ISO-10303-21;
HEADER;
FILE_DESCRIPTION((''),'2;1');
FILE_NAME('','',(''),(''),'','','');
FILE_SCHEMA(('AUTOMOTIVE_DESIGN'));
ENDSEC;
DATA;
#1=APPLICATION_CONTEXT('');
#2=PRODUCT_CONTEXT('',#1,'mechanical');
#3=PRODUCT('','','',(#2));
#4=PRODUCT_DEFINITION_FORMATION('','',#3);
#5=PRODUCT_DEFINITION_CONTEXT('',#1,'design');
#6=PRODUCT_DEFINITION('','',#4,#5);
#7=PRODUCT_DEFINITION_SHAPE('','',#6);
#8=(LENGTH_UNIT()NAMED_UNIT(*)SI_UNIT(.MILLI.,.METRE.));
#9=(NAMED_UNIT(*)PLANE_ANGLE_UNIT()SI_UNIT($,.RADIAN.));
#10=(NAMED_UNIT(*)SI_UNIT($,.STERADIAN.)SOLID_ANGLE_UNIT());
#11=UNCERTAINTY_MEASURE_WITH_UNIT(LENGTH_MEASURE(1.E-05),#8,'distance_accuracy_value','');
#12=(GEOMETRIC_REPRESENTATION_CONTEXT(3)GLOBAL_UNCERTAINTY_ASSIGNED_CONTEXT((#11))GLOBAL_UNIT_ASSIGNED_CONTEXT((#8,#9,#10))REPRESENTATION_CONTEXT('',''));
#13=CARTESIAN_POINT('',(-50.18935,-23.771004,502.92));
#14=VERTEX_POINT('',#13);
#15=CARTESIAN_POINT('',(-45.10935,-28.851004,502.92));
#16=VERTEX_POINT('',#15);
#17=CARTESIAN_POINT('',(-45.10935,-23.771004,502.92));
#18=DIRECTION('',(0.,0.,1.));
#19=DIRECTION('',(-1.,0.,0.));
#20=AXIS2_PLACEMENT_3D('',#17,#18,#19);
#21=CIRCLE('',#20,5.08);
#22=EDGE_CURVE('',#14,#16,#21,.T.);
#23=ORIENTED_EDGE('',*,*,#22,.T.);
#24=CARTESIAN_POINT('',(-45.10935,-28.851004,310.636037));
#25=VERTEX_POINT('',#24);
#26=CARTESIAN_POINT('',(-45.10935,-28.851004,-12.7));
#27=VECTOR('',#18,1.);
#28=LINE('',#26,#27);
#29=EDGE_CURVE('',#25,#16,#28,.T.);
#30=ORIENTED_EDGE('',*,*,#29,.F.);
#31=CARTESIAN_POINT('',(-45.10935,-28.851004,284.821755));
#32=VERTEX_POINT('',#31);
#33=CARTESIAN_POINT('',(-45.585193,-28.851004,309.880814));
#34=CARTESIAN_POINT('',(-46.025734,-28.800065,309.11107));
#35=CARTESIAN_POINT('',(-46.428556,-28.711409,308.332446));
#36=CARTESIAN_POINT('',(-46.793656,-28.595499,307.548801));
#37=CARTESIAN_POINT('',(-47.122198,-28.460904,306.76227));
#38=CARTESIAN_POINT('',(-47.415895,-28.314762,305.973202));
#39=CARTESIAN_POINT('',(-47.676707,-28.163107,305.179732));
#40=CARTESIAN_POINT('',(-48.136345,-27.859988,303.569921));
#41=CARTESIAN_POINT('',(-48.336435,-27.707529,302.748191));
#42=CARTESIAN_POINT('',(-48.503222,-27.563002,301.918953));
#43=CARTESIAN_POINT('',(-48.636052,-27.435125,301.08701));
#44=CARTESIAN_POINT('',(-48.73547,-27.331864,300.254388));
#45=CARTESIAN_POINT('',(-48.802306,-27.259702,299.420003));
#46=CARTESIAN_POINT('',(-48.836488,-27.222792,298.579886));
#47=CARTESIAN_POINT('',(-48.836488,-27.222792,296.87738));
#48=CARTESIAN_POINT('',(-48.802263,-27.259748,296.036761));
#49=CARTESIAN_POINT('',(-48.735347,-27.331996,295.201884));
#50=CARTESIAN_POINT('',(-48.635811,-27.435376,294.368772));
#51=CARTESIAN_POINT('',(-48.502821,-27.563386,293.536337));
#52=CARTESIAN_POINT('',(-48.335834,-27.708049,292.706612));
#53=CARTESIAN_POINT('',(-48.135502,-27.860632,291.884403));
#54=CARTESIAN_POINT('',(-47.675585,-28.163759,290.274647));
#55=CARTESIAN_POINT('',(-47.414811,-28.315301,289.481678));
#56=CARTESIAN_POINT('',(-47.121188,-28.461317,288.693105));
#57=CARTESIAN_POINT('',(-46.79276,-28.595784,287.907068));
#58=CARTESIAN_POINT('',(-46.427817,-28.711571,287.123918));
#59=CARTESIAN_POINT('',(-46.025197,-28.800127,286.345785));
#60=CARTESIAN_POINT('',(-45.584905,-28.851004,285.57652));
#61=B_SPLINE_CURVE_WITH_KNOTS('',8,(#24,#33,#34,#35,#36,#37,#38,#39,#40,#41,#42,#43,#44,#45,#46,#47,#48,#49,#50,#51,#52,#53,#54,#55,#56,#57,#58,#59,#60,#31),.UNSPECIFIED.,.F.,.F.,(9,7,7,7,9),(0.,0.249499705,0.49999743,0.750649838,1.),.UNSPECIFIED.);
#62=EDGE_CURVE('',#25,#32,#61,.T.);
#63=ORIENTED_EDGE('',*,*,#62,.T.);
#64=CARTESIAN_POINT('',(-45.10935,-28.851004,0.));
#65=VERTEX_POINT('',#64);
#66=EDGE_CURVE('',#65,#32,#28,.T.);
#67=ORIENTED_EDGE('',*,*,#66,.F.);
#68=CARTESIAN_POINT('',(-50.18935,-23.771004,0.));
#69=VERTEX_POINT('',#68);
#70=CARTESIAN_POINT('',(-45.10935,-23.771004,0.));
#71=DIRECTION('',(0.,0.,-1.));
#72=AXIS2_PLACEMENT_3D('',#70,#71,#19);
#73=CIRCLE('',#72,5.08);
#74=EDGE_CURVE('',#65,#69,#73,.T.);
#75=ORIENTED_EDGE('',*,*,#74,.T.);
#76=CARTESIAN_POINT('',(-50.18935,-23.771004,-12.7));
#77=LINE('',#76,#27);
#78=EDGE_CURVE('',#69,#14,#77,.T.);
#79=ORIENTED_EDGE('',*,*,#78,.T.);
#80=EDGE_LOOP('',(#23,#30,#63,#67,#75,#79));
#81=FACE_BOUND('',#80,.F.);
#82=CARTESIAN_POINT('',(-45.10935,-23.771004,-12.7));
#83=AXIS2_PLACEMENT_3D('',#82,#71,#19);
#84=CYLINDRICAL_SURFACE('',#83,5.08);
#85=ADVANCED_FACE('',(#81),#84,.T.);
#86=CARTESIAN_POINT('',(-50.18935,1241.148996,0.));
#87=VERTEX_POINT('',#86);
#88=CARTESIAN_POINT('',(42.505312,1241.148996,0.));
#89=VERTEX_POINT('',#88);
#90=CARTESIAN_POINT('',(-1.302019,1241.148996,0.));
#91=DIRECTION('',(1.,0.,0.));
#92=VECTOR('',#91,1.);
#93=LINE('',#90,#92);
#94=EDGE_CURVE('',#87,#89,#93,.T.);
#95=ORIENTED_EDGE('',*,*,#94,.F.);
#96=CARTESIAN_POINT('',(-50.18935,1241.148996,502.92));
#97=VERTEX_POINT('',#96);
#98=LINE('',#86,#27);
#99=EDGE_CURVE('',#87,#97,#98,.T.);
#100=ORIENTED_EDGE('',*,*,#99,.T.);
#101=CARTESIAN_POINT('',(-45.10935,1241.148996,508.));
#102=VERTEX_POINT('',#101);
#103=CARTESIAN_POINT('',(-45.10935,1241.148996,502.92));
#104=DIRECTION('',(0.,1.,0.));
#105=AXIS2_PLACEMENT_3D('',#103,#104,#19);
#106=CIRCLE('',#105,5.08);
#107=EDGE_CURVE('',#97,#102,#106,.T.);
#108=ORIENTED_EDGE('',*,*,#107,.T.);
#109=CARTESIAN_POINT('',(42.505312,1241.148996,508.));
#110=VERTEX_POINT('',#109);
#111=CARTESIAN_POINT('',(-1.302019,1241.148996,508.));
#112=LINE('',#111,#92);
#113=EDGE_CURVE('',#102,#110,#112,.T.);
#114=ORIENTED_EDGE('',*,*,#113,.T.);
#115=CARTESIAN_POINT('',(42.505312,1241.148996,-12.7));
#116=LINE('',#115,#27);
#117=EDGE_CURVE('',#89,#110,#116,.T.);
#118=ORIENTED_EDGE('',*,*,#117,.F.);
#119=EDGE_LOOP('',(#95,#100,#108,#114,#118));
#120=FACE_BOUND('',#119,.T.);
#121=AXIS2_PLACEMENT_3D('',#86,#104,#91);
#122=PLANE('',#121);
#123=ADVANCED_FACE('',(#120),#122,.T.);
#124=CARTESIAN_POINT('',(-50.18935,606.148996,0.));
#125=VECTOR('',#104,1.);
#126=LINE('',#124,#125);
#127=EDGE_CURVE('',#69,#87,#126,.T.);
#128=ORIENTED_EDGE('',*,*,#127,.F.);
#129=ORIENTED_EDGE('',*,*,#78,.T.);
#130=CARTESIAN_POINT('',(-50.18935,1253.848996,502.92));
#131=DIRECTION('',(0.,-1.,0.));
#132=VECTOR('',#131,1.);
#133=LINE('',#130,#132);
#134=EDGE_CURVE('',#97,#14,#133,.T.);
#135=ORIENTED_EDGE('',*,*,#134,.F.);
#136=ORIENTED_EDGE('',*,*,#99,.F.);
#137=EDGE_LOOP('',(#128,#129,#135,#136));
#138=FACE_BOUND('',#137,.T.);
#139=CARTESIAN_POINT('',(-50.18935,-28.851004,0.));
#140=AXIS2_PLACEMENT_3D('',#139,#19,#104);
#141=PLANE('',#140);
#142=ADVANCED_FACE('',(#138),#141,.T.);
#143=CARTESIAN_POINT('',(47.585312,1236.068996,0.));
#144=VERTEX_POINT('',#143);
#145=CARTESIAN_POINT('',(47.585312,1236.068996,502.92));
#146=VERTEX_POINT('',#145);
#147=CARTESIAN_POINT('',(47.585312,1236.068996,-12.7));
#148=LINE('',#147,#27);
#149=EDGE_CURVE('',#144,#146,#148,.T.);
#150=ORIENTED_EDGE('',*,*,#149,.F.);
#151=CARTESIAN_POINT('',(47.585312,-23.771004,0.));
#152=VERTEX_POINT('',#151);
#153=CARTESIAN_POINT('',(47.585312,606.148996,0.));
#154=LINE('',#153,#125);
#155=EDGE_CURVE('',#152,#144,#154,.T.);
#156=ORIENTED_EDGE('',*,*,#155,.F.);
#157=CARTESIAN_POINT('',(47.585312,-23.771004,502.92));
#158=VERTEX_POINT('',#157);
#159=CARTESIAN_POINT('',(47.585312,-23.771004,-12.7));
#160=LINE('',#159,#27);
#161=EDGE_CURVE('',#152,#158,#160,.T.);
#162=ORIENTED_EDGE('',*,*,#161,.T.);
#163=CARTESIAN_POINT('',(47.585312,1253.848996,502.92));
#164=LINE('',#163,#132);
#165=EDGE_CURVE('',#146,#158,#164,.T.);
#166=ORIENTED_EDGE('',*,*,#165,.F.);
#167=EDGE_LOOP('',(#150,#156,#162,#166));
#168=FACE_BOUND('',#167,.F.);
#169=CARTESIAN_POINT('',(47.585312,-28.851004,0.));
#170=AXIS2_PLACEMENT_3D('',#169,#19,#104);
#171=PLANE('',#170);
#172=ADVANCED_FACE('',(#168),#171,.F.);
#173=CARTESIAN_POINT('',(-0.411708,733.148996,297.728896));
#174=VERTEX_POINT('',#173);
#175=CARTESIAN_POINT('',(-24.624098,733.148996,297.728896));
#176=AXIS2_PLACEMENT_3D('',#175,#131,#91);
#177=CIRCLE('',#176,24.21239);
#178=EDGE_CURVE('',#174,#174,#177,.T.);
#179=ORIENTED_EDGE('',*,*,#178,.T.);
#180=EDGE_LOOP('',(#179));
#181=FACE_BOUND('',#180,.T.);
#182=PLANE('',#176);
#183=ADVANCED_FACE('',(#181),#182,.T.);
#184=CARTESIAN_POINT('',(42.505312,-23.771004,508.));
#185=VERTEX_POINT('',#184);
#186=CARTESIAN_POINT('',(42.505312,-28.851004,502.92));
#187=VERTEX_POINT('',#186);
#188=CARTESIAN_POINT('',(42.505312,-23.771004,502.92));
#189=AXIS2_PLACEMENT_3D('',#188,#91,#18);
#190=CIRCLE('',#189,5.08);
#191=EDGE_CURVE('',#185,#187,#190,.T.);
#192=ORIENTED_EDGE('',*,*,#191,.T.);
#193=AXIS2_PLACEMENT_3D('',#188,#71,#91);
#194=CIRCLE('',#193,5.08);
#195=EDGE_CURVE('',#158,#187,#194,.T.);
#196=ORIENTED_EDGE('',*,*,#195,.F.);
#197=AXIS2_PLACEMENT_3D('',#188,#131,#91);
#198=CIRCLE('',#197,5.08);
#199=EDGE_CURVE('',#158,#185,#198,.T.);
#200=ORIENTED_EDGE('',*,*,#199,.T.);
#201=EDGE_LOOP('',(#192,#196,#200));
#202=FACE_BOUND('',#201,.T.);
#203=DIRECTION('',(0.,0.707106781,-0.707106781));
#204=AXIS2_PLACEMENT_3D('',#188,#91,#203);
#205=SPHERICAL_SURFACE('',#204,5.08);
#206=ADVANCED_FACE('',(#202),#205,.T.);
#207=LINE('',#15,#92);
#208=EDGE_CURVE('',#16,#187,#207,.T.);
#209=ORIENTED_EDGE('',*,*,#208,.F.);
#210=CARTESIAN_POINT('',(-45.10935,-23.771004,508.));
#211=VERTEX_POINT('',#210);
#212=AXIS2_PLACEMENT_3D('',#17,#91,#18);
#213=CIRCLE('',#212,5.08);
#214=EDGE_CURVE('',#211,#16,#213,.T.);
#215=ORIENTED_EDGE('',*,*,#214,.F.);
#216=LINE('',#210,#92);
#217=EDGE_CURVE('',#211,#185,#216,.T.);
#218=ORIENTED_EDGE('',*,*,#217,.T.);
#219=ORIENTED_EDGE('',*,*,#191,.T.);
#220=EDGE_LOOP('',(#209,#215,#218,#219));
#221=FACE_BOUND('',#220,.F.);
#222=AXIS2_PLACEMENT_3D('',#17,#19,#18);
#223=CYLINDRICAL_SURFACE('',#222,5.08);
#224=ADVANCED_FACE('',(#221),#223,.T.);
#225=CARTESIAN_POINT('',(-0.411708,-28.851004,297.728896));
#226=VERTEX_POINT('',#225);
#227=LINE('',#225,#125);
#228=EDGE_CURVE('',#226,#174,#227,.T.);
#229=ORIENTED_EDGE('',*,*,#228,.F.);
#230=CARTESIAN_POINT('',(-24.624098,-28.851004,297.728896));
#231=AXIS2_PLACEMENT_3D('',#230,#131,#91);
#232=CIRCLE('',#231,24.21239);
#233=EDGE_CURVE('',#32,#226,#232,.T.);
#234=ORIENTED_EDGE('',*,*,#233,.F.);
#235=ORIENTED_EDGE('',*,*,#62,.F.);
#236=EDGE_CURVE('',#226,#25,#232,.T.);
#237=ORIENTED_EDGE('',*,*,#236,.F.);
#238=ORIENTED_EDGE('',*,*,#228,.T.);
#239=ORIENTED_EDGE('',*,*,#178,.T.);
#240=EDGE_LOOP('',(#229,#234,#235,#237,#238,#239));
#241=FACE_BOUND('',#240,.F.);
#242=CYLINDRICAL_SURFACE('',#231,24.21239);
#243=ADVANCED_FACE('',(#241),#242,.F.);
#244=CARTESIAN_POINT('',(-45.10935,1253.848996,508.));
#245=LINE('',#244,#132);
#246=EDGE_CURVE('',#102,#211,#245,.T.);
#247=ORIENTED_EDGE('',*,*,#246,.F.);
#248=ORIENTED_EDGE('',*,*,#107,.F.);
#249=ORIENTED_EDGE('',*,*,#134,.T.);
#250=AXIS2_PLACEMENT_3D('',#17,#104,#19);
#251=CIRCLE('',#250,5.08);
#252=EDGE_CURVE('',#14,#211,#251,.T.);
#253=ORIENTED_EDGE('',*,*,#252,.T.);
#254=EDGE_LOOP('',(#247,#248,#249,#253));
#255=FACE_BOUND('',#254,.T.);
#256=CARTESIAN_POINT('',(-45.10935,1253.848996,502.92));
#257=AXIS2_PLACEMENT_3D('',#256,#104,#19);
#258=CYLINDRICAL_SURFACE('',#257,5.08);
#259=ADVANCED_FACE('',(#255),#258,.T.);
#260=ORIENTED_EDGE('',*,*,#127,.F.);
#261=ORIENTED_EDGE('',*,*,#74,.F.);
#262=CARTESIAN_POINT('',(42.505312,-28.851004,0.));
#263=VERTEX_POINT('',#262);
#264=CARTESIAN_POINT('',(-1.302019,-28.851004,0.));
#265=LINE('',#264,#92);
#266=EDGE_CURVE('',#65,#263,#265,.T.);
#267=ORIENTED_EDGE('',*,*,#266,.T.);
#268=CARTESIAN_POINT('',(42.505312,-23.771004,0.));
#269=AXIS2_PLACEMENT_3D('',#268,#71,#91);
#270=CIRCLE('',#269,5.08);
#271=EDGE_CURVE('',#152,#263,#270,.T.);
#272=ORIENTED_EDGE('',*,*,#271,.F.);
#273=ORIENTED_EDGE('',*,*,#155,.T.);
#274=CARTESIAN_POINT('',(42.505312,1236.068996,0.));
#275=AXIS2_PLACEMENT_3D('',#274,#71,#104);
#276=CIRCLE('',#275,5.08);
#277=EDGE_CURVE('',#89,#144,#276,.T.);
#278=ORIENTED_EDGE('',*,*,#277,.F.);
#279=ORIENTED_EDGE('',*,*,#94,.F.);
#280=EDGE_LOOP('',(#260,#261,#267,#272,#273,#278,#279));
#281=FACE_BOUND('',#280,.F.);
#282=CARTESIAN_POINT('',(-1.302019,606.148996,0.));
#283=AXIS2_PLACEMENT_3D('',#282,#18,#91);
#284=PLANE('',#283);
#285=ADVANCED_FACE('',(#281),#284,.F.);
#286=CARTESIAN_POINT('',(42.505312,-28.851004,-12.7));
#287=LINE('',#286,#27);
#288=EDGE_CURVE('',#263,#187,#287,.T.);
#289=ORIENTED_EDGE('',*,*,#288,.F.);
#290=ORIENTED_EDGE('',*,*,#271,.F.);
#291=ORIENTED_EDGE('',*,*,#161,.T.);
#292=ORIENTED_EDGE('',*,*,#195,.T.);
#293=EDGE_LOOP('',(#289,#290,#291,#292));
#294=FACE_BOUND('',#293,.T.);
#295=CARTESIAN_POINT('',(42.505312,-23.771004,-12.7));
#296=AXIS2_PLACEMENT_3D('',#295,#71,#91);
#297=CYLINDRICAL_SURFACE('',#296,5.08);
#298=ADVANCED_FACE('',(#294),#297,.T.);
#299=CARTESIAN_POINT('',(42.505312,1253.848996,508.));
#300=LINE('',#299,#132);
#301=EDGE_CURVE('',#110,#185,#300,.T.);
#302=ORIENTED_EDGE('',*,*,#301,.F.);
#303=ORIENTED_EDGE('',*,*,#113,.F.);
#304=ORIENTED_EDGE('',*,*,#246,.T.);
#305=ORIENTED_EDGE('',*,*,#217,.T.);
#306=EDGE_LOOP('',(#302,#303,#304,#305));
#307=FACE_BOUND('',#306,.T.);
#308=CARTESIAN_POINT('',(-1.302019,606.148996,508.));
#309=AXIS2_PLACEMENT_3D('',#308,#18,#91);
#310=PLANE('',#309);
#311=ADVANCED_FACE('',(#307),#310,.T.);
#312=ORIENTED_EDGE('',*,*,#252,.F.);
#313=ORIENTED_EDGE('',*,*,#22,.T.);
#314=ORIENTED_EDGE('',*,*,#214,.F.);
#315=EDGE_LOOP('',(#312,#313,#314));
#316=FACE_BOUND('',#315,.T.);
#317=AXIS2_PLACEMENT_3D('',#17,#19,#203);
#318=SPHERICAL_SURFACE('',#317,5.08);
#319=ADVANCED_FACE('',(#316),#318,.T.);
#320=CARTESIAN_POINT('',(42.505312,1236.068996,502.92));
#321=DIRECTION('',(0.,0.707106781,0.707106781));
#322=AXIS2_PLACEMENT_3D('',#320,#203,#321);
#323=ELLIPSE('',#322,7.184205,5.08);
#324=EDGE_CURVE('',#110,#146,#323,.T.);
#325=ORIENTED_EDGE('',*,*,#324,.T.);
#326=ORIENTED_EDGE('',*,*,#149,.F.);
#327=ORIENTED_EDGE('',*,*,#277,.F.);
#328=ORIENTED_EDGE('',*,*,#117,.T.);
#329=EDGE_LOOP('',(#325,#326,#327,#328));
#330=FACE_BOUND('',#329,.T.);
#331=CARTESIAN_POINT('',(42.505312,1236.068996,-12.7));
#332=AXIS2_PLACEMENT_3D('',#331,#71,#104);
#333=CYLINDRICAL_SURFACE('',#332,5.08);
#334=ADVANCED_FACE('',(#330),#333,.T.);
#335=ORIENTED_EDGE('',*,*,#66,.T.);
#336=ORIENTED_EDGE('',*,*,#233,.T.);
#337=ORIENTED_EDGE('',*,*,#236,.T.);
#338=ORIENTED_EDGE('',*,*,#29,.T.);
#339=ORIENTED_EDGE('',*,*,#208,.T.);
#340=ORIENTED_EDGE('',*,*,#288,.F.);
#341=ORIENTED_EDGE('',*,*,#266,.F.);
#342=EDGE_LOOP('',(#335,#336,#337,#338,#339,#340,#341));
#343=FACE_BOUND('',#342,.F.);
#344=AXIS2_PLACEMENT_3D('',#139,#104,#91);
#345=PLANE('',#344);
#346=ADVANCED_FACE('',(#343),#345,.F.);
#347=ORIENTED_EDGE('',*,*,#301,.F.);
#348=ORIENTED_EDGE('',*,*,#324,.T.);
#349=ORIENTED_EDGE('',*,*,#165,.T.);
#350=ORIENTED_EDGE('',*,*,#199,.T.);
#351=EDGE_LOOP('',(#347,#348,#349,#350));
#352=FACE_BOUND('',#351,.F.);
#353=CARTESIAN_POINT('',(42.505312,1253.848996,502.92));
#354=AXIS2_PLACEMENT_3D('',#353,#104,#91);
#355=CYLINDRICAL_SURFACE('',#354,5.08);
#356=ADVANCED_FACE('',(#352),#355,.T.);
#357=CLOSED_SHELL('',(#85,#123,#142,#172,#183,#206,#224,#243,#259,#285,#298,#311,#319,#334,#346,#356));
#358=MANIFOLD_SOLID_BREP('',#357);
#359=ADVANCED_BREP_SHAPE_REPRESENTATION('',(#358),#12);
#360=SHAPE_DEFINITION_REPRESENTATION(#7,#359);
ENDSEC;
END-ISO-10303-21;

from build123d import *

# Parameters (mm, degrees)
F0_W         = 97.7746620774
F0_H         = 1270
F1_DEPTH     = 508
F2_R         = 24.2123900656
F3_DEPTH     = 762
F4_T1_DEPTH  = 87.6146620774
F4_T3_DEPTH  = 1277.62
F4_T5_DEPTH  = 515.62
F4_T7_DEPTH  = 533.4
F4_S11_W     = 5.08
F4_S11_H     = 5.08
F4_T12_DEPTH = 5.08
F4_S17_W     = 5.08
F4_S17_H     = 5.08
F4_T18_DEPTH = 5.08


# Not quite as in the source:
# - a fillet or chamfer that OpenCascade refuses, or shapes differently, is made with other operations: its cross-section is extruded or revolved along the edge and cut away or added


with BuildPart() as f1:
    # F0 (on Top) → F1 (new body)
    with BuildSketch(Plane.XY):
        with Locations((-1.3020187616, 606.1489956826)):
            Rectangle(F0_W, F0_H)
    extrude(amount=F1_DEPTH)

    # F2 (on face) → F3 (cut)
    with BuildSketch(Plane.XZ.offset(28.8510043174)):
        with Locations((-24.6240980923, 297.7288961411)):
            Circle(F2_R)
    extrude(amount=-F3_DEPTH, mode=Mode.SUBTRACT)

    # F4: fillet of radius 5.08 on 6 edges, made by hand

    # F4_s2 → F4_t1 (cut)
    with BuildSketch(Plane.YZ.offset(-45.1093498003)):
        with BuildLine():
            ThreePointArc((-23.7710043174, 508), (-27.3631067658, 506.5121024484), (-28.8510043174, 502.92))
            Line((-28.8510043174, 502.92), (-28.8510043174, 508))
            Line((-28.8510043174, 508), (-23.7710043174, 508))
        make_face()
    extrude(amount=F4_T1_DEPTH, mode=Mode.SUBTRACT)

    # F4_s4 → F4_t3 (cut)
    with BuildSketch(Plane.XZ.offset(-1253.8489956826)):
        with BuildLine():
            ThreePointArc((47.5853122771, 502.92), (46.0974147255, 506.5121024484), (42.5053122771, 508))
            Line((42.5053122771, 508), (47.5853122771, 508))
            Line((47.5853122771, 508), (47.5853122771, 502.92))
        make_face()
        with BuildLine():
            ThreePointArc((-50.1893498003, 502.92), (-48.7014522488, 506.5121024484), (-45.1093498003, 508))
            Line((-45.1093498003, 508), (-50.1893498003, 508))
            Line((-50.1893498003, 508), (-50.1893498003, 502.92))
        make_face()
    extrude(amount=F4_T3_DEPTH, mode=Mode.SUBTRACT)

    # F4_s6 → F4_t5 (cut)
    with BuildSketch(Plane.XY.offset(-12.7)):
        with BuildLine():
            ThreePointArc((47.5853122771, -23.7710043174), (46.0974147255, -27.3631067658), (42.5053122771, -28.8510043174))
            Line((42.5053122771, -28.8510043174), (47.5853122771, -28.8510043174))
            Line((47.5853122771, -28.8510043174), (47.5853122771, -23.7710043174))
        make_face()
        with BuildLine():
            ThreePointArc((-50.1893498003, -23.7710043174), (-48.7014522488, -27.3631067658), (-45.1093498003, -28.8510043174))
            Line((-45.1093498003, -28.8510043174), (-50.1893498003, -28.8510043174))
            Line((-50.1893498003, -28.8510043174), (-50.1893498003, -23.7710043174))
        make_face()
    extrude(amount=F4_T5_DEPTH, mode=Mode.SUBTRACT)

    # F4_s8 → F4_t7 (cut)
    with BuildSketch(Plane.XY.offset(-12.7)):
        with BuildLine():
            ThreePointArc((42.5053122771, 1241.1489956826), (46.0974147255, 1239.661098131), (47.5853122771, 1236.0689956826))
            Line((47.5853122771, 1236.0689956826), (47.5853122771, 1241.1489956826))
            Line((47.5853122771, 1241.1489956826), (42.5053122771, 1241.1489956826))
        make_face()
    extrude(amount=F4_T7_DEPTH, mode=Mode.SUBTRACT)


with BuildPart() as f4_tool10:
    # F4_s11 → F4_t12 (new body)
    with BuildSketch(Plane.YZ.offset(-45.1093498003)):
        with Locations((-26.3110043174, 505.46)):
            Rectangle(F4_S11_W, F4_S11_H)
    extrude(amount=-F4_T12_DEPTH)

    # F4_s13 → F4_t14 (revolve, cut)
    with BuildSketch(Plane(origin=(-45.1093498003, -23.7710043174, 502.92), x_dir=(0, 0.7071067812, -0.7071067812), z_dir=(0, 0.7071067812, 0.7071067812))):
        with BuildLine():
            ThreePointArc((0, -5.08), (5.08, 0), (0, 5.08))
            Line((0, 5.08), (0, -5.08))
        make_face()
    revolve(axis=Axis((-45.1093498003, -23.7710043174, 502.92), (-1, 0, 0)), mode=Mode.SUBTRACT)


with BuildPart() as f1_1:
    add(f1.part)

    # F4_t9: cut F4_tool10
    add(f4_tool10.part, mode=Mode.SUBTRACT)


with BuildPart() as f4_tool16:
    # F4_s17 → F4_t18 (new body)
    with BuildSketch(Plane.YZ.offset(42.5053122771)):
        with Locations((-26.3110043174, 505.46)):
            Rectangle(F4_S17_W, F4_S17_H)
    extrude(amount=F4_T18_DEPTH)

    # F4_s19 → F4_t20 (revolve, cut)
    with BuildSketch(Plane(origin=(42.5053122771, -23.7710043174, 502.92), x_dir=(0, 0.7071067812, -0.7071067812), z_dir=(0, -0.7071067812, -0.7071067812))):
        with BuildLine():
            ThreePointArc((0, -5.08), (5.08, 0), (0, 5.08))
            Line((0, 5.08), (0, -5.08))
        make_face()
    revolve(axis=Axis((42.5053122771, -23.7710043174, 502.92), (1, 0, 0)), mode=Mode.SUBTRACT)


with BuildPart() as f1_2:
    add(f1_1.part)

    # F4_t15: cut F4_tool16
    add(f4_tool16.part, mode=Mode.SUBTRACT)


solid = f1_2.part
